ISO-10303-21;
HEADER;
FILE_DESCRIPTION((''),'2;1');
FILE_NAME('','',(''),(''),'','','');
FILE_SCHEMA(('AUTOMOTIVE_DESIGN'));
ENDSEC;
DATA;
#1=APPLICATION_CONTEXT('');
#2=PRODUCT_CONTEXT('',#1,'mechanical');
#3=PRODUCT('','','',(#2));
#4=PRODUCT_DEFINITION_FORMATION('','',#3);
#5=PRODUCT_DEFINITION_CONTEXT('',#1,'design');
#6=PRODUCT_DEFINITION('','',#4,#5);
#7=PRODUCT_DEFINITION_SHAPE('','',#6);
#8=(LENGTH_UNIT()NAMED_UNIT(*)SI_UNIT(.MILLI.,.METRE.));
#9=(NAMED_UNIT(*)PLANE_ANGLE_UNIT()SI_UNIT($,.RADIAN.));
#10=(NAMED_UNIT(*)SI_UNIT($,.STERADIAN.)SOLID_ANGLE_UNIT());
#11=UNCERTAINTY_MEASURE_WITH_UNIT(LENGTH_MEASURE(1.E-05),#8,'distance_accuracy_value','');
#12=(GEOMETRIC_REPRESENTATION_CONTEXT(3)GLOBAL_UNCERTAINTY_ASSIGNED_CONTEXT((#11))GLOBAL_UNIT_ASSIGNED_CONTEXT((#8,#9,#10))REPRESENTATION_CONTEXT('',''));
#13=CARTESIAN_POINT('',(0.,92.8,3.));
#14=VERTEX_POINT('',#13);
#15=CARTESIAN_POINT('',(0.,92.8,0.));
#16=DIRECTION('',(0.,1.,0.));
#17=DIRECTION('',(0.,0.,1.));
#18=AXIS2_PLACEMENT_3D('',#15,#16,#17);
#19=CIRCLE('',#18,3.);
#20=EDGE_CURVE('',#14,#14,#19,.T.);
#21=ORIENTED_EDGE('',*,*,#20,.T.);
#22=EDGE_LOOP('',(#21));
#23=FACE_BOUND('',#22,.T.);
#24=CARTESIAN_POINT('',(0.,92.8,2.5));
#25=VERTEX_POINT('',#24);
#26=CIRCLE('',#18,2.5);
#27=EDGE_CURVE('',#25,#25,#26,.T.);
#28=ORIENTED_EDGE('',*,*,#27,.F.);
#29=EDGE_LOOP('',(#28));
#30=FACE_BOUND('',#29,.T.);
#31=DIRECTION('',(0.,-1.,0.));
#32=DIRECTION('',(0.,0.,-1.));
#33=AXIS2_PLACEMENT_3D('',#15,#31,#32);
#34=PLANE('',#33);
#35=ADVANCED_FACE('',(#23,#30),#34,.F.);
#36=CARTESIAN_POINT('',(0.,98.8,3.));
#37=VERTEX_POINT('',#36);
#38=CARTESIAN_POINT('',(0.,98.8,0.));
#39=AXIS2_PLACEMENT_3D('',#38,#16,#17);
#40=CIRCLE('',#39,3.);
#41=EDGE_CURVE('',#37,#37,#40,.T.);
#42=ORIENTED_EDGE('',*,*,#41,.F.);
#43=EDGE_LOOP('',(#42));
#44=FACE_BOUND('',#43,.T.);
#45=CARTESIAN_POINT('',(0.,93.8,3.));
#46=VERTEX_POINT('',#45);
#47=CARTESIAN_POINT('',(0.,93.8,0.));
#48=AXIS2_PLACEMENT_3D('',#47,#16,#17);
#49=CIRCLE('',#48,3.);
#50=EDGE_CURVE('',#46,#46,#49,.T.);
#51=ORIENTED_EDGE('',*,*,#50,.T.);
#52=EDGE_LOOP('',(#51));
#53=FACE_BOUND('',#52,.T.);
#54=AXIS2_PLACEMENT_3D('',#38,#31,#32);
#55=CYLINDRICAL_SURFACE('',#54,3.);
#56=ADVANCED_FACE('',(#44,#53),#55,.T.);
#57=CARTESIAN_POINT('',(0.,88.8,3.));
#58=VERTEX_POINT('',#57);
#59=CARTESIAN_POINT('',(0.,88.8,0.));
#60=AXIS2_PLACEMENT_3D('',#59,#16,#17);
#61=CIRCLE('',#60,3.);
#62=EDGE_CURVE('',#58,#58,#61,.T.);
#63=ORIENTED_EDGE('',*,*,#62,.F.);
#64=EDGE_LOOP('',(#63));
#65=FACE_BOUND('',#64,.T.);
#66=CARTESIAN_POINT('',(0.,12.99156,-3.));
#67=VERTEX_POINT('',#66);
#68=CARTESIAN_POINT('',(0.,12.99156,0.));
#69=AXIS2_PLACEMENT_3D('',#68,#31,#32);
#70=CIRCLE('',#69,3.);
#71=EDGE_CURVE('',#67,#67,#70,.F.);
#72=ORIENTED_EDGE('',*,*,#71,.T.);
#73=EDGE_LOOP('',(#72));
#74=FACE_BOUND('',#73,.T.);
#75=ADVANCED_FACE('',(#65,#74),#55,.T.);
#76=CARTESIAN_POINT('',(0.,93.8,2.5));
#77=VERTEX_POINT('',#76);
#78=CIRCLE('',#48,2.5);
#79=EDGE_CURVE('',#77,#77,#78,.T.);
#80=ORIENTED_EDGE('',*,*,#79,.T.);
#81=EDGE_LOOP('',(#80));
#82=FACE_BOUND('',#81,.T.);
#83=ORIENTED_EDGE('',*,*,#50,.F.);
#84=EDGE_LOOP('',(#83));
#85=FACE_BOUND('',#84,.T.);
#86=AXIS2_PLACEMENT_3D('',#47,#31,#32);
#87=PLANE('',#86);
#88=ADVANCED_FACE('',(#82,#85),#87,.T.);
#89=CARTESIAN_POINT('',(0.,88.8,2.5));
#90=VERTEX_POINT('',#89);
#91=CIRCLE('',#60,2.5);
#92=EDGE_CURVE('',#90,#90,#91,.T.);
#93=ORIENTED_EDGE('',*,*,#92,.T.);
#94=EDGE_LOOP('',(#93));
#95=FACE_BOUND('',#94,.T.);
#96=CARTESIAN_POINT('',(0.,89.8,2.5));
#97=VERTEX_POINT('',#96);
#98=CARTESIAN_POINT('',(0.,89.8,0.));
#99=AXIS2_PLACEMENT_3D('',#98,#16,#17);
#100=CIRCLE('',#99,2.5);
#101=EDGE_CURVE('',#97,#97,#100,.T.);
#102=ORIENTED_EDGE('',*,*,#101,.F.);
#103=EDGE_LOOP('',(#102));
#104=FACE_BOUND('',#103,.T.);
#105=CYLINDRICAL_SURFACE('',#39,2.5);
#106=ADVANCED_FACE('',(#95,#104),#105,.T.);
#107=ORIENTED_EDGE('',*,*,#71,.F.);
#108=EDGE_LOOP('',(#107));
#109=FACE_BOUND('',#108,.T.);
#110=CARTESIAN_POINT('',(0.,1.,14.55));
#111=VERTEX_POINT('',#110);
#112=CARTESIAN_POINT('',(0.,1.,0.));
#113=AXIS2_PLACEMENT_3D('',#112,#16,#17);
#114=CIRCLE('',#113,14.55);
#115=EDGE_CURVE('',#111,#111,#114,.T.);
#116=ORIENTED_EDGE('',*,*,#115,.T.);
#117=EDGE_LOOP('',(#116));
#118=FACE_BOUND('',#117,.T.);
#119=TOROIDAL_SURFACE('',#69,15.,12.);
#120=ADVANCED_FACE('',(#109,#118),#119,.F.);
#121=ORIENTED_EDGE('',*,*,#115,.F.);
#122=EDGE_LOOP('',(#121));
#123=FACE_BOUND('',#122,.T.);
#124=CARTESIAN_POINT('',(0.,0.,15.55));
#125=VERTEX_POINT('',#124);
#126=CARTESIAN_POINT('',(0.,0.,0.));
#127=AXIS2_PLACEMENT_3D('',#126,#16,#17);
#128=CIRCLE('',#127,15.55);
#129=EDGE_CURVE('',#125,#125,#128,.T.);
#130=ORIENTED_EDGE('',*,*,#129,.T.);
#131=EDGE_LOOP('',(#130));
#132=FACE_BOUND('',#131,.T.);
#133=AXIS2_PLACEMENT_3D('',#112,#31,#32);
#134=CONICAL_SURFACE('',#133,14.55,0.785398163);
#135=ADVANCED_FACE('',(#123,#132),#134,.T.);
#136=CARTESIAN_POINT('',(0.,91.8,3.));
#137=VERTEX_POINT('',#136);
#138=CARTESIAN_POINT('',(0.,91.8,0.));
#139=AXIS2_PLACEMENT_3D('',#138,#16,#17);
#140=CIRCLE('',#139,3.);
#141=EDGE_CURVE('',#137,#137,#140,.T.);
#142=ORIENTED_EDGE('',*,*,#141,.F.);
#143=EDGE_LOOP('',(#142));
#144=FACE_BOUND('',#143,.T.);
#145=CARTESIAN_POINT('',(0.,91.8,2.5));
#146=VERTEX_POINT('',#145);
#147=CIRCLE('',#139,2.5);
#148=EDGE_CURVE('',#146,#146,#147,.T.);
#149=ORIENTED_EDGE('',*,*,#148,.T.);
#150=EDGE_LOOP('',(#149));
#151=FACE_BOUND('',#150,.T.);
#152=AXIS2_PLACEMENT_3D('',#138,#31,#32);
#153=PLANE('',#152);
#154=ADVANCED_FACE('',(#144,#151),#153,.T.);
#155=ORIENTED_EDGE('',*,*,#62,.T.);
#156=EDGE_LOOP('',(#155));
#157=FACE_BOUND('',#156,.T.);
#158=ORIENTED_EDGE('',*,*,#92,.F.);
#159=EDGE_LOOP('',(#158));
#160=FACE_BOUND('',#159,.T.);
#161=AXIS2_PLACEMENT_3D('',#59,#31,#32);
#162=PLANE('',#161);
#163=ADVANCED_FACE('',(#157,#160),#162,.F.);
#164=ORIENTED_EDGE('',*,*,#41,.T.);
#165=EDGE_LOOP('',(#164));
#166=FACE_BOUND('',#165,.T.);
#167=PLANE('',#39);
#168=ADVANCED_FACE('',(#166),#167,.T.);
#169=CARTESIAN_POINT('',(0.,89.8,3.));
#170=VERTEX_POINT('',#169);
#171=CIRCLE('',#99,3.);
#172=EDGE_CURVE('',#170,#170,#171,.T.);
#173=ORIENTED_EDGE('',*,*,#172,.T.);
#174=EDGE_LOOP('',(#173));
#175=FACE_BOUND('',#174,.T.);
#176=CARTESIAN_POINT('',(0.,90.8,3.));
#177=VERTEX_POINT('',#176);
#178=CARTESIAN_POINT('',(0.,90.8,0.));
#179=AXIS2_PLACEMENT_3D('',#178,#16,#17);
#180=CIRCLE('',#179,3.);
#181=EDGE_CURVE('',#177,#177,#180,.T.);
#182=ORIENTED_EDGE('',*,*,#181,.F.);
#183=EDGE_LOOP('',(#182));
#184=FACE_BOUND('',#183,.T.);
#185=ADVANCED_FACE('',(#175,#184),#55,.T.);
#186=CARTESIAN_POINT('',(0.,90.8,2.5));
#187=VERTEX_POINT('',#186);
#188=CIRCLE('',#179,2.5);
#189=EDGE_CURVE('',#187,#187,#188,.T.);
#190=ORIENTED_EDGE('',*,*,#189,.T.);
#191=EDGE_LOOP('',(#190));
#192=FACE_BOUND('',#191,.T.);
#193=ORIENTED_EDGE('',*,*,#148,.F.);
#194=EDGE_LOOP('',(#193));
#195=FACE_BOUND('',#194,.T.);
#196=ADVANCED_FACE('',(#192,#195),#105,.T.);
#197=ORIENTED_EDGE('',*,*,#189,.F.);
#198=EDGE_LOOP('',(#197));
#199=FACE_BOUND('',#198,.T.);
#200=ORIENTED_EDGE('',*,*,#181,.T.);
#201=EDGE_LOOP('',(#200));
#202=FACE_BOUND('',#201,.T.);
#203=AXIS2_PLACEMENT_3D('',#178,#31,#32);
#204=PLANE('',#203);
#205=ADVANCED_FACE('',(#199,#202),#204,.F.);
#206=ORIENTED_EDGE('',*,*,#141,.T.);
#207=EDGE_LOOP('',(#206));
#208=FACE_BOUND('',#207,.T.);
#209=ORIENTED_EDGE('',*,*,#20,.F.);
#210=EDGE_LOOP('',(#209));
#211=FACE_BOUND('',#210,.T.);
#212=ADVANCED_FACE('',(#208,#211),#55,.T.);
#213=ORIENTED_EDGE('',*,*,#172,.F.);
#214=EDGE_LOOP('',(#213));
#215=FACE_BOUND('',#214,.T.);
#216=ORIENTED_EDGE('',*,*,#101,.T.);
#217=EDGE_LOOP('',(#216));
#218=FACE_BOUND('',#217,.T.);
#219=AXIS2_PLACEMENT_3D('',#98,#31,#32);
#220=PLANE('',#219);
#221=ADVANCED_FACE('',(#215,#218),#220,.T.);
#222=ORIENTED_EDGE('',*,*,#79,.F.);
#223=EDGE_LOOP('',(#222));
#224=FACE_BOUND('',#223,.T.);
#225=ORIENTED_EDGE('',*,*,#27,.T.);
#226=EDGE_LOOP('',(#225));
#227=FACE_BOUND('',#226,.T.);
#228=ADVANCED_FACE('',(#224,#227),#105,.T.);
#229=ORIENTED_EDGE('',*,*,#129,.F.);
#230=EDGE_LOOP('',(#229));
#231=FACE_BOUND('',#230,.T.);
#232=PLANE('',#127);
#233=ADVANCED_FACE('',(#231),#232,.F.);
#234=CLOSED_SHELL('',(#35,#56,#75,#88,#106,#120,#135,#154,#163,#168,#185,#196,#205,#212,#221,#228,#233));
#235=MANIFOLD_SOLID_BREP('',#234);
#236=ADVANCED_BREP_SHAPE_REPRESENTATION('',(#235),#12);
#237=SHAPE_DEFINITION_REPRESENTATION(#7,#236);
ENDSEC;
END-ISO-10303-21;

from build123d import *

# Parameters (mm, degrees)
SKETCH1_R           = 15.55
BOSS_EXTRUDE1_DEPTH = 1
CHAMFER2_SIZE       = 1
SKETCH4_R           = 3
BOSS_EXTRUDE2_DEPTH = 97.8
FILLET1_R           = 12
SKETCH5_W           = 0.5
SKETCH5_H           = 1


# Some blends are built 0.0001 mm under size
with BuildPart() as part:
    # Sketch1 → Boss-Extrude1 (new body)
    with BuildSketch(Plane(origin=(0, 0, 0), x_dir=(1, 0, 0), z_dir=(0, 1, 0))):
        with Locations(Location((0, 0, 0), (0, 0, 270))):
            Circle(SKETCH1_R)
    extrude(amount=BOSS_EXTRUDE1_DEPTH)

    # Chamfer2
    chamfer2_edges = [part.edges().sort_by_distance(p)[0] for p in [
        (0, 1, -15.55),
    ]]
    chamfer(chamfer2_edges, length=CHAMFER2_SIZE - 0.0001)  # a hair under: the kernel refuses the full size

    # Sketch4 → Boss-Extrude2 (add)
    with BuildSketch(Plane(origin=(0, 1, 0), x_dir=(1, 0, 0), z_dir=(0, 1, 0))):
        with Locations(Location((0, 0, 0), (0, 0, 270))):
            Circle(SKETCH4_R)
    extrude(amount=BOSS_EXTRUDE2_DEPTH)

    # Fillet1
    # the kernel refuses this fillet: 12 mm, written as the material it adds along each edge
    with BuildSketch(Plane(origin=(0, 1, 0), x_dir=(0, 0, 1), z_dir=(-1, 0, 0))) as fillet1_piece_1:
        with BuildLine():
            CenterArc((15, 11.991563284), FILLET1_R, 180, 87.851382174)
            Line((3, 11.991563284), (2.76, 11.991563284))
            Line((2.76, 11.991563284), (2.76, 0))
            Line((2.76, 0), (3, -0.24))
            ThreePointArc((3, -0.24), (8.77505, -0.24), (14.541102, -0.239831266))
            Line((14.541102, -0.239831266), (14.5501, 0))
        make_face()
    revolve(axis=Axis((0, 1, 0), (0, 1, 0)))

    # Sketch5 → Cut-Revolve1 (revolve, cut)
    with BuildSketch(Plane.XY, mode=Mode.PRIVATE) as cut_revolve1_sk:
        with Locations((-2.75, 93.3)):
            Rectangle(SKETCH5_W, SKETCH5_H)
        with Locations((-2.75, 91.3)):
            Rectangle(SKETCH5_W, SKETCH5_H)
        with Locations((-2.75, 89.3)):
            Rectangle(SKETCH5_W, SKETCH5_H)
    revolve(cut_revolve1_sk.sketch.rotate(Axis((0, 98.8, 0), (0, -1, 0)), 270), axis=Axis((0, 98.8, 0), (0, -1, 0)), mode=Mode.SUBTRACT)


solid = part.part
